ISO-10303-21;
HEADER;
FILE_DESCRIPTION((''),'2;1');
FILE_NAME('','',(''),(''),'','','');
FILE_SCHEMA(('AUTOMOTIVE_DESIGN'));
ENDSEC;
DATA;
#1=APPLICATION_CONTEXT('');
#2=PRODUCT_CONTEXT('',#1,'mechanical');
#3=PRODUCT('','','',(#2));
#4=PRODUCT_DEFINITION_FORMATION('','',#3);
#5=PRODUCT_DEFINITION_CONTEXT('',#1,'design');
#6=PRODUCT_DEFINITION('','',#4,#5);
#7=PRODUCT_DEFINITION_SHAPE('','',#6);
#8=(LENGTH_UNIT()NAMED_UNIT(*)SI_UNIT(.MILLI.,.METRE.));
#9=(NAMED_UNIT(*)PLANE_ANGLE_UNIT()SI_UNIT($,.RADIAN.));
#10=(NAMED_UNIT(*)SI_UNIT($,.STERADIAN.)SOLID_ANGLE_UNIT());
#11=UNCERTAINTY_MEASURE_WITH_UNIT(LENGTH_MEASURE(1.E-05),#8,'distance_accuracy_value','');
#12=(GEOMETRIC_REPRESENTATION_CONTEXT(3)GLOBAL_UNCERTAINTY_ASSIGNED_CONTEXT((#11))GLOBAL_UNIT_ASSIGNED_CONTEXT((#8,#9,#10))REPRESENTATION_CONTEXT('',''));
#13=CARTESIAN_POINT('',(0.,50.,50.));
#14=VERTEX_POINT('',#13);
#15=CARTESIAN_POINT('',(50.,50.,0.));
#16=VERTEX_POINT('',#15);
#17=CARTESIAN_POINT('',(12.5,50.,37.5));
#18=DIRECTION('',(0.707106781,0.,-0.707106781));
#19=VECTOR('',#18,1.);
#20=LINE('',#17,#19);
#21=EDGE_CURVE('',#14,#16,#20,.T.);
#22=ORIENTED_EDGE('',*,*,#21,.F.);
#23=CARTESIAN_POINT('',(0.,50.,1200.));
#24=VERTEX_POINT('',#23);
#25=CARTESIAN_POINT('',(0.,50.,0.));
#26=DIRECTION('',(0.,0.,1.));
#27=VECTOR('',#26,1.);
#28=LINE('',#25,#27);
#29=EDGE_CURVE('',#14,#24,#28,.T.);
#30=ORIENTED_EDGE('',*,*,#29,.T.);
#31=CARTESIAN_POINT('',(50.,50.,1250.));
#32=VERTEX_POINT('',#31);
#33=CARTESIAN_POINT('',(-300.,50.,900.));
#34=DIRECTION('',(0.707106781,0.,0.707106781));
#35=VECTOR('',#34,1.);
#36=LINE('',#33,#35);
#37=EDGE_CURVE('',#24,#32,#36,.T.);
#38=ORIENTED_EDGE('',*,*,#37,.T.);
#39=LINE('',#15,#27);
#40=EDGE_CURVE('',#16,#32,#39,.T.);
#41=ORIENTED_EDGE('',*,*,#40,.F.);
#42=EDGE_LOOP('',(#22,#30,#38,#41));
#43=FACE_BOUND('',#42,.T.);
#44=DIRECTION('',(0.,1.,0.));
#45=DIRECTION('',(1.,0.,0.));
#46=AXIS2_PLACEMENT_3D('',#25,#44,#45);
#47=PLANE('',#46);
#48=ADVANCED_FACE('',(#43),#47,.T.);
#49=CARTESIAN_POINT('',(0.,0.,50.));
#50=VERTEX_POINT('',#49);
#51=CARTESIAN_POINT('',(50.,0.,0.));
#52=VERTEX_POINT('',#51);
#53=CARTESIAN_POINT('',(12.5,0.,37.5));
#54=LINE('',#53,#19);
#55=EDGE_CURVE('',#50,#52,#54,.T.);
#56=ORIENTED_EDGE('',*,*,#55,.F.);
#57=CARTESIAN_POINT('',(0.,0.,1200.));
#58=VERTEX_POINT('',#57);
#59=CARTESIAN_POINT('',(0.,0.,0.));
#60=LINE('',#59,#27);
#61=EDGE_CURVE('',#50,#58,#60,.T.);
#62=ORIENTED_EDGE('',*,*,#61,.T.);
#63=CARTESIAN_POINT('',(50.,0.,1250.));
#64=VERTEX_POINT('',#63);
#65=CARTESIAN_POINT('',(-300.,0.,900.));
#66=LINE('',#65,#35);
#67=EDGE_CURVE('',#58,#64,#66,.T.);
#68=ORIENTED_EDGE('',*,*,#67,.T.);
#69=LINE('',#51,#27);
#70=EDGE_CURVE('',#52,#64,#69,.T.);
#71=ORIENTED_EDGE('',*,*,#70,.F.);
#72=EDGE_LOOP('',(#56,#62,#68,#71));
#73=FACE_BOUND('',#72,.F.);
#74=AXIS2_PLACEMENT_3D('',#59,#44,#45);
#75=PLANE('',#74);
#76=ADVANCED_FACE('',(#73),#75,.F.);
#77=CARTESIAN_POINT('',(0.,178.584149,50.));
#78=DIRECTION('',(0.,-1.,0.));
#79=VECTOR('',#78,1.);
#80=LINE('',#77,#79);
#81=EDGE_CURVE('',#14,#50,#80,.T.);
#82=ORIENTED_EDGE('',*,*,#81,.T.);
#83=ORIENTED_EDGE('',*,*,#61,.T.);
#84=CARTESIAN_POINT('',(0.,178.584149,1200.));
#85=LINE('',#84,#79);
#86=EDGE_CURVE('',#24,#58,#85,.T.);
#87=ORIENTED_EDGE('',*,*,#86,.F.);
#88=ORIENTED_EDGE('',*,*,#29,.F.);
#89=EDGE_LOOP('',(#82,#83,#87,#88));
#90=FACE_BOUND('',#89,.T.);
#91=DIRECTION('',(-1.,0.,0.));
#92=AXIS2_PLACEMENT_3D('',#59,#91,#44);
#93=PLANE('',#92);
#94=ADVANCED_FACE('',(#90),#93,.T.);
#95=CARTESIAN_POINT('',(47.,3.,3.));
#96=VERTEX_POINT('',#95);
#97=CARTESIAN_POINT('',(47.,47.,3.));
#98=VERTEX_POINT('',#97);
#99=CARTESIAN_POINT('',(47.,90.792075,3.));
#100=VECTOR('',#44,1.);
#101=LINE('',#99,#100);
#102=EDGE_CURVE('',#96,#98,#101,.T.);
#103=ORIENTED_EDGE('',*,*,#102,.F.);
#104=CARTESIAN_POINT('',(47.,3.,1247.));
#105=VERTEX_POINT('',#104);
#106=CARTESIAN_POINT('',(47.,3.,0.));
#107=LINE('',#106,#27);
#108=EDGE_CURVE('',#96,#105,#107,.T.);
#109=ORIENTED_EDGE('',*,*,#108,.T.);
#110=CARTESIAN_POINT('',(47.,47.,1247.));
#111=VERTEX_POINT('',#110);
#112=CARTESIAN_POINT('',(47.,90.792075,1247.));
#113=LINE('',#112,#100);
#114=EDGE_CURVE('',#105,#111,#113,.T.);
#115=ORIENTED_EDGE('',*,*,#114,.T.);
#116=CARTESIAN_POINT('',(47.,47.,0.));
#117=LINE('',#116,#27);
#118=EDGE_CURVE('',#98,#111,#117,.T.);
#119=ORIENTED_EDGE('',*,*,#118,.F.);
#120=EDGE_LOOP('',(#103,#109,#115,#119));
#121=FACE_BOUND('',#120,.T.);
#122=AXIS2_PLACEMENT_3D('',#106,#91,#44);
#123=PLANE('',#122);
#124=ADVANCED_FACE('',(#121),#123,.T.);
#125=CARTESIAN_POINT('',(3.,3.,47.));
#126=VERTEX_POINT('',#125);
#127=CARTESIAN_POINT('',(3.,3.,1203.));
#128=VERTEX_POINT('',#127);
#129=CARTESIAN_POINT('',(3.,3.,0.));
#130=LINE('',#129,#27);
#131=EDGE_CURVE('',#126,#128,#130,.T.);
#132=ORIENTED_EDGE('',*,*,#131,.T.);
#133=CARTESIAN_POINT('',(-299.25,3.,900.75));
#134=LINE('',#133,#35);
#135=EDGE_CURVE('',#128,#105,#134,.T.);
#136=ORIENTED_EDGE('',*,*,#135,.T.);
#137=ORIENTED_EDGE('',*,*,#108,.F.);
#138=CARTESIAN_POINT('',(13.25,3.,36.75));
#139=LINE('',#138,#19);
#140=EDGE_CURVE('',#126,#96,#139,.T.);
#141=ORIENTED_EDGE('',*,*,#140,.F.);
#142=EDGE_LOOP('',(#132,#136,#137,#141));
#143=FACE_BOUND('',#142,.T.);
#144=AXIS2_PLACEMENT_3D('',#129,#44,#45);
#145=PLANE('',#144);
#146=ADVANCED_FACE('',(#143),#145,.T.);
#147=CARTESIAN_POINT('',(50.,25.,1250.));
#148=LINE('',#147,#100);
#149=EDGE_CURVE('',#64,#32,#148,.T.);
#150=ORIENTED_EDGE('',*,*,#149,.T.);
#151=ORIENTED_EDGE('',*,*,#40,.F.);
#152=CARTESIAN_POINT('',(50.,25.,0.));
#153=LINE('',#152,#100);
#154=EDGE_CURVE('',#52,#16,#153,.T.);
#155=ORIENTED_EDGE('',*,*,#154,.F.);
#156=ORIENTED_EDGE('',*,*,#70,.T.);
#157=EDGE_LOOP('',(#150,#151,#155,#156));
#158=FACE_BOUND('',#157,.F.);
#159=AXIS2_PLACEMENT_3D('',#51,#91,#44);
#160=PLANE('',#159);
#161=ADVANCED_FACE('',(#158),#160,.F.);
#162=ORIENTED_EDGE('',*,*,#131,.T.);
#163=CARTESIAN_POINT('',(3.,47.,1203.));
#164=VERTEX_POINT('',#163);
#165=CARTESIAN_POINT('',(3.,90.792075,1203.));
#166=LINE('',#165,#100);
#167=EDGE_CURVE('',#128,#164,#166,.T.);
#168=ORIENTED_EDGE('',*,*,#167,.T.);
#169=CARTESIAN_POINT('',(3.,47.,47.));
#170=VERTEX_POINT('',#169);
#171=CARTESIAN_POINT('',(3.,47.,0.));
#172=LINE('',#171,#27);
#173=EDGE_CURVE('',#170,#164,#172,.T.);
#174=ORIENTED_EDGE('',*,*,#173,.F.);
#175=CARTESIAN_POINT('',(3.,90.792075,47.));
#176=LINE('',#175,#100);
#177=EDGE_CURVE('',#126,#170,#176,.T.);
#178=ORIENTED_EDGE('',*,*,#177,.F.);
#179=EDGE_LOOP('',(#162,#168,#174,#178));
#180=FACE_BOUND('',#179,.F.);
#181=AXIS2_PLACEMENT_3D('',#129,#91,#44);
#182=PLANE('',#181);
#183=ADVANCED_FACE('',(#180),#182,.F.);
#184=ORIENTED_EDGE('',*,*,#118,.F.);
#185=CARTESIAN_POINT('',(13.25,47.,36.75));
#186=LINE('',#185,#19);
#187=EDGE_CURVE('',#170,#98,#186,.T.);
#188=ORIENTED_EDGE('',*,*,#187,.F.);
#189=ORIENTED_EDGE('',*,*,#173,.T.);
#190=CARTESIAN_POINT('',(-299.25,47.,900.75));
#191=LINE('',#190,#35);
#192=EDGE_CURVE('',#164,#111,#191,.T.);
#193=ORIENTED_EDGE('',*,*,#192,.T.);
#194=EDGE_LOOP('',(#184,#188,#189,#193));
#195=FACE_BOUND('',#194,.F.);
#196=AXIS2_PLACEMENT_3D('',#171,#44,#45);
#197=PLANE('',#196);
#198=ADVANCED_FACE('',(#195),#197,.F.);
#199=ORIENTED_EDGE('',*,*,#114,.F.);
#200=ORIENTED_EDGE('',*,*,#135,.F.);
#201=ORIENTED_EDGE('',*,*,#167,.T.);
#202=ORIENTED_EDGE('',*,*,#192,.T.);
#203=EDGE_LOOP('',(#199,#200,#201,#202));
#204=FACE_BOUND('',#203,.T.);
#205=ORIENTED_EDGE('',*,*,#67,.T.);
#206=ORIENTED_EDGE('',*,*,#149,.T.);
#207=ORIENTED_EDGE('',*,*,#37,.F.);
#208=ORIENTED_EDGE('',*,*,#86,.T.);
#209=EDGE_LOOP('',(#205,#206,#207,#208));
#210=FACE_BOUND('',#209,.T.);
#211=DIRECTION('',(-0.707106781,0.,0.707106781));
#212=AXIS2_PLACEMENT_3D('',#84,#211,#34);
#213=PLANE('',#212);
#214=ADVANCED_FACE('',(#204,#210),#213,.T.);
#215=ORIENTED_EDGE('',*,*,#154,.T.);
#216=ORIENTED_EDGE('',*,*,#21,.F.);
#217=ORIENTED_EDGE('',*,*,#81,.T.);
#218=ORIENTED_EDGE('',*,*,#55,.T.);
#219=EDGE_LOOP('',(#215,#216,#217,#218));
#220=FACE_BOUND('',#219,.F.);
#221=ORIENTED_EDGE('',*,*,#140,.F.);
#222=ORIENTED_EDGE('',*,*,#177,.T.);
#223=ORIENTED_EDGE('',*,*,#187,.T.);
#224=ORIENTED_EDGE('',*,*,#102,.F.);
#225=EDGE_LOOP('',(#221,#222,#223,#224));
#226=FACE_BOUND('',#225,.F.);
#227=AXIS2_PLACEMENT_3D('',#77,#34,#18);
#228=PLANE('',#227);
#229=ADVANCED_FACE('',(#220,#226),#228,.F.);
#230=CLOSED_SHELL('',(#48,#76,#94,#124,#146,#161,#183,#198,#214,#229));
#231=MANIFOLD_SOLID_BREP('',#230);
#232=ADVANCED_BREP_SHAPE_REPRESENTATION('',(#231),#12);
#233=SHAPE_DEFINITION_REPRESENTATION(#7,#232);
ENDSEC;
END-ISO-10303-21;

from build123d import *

# Parameters (mm, degrees)
F0_W        = 50
F0_H        = 50
F0_W_2      = 44
F0_H_2      = 44
F1_DEPTH    = 1250
F2_T1_DEPTH = 307.1682987966


# Not quite as in the source:
# - a fillet or chamfer that OpenCascade refuses, or shapes differently, is made with other operations: its cross-section is extruded or revolved along the edge and cut away or added


with BuildPart() as f1:
    # F0 (on Top) → F1 (new body)
    with BuildSketch(Plane.XY):
        with Locations((25, 25)):
            Rectangle(F0_W, F0_H)
        with Locations((25, 25)):
            Rectangle(F0_W_2, F0_H_2, mode=Mode.SUBTRACT)
    extrude(amount=F1_DEPTH)

    # F2: chamfer of 50 on 2 edges, made by hand

    # F2_s2 → F2_t1 (cut)
    with BuildSketch(Plane.XZ.offset(-178.5841493983)):
        Polygon((0, 50), (50, 0), (0, 0), align=None)
        Polygon((0, 1200), (50, 1250), (0, 1250), align=None)
    extrude(amount=F2_T1_DEPTH, mode=Mode.SUBTRACT)


solid = f1.part
